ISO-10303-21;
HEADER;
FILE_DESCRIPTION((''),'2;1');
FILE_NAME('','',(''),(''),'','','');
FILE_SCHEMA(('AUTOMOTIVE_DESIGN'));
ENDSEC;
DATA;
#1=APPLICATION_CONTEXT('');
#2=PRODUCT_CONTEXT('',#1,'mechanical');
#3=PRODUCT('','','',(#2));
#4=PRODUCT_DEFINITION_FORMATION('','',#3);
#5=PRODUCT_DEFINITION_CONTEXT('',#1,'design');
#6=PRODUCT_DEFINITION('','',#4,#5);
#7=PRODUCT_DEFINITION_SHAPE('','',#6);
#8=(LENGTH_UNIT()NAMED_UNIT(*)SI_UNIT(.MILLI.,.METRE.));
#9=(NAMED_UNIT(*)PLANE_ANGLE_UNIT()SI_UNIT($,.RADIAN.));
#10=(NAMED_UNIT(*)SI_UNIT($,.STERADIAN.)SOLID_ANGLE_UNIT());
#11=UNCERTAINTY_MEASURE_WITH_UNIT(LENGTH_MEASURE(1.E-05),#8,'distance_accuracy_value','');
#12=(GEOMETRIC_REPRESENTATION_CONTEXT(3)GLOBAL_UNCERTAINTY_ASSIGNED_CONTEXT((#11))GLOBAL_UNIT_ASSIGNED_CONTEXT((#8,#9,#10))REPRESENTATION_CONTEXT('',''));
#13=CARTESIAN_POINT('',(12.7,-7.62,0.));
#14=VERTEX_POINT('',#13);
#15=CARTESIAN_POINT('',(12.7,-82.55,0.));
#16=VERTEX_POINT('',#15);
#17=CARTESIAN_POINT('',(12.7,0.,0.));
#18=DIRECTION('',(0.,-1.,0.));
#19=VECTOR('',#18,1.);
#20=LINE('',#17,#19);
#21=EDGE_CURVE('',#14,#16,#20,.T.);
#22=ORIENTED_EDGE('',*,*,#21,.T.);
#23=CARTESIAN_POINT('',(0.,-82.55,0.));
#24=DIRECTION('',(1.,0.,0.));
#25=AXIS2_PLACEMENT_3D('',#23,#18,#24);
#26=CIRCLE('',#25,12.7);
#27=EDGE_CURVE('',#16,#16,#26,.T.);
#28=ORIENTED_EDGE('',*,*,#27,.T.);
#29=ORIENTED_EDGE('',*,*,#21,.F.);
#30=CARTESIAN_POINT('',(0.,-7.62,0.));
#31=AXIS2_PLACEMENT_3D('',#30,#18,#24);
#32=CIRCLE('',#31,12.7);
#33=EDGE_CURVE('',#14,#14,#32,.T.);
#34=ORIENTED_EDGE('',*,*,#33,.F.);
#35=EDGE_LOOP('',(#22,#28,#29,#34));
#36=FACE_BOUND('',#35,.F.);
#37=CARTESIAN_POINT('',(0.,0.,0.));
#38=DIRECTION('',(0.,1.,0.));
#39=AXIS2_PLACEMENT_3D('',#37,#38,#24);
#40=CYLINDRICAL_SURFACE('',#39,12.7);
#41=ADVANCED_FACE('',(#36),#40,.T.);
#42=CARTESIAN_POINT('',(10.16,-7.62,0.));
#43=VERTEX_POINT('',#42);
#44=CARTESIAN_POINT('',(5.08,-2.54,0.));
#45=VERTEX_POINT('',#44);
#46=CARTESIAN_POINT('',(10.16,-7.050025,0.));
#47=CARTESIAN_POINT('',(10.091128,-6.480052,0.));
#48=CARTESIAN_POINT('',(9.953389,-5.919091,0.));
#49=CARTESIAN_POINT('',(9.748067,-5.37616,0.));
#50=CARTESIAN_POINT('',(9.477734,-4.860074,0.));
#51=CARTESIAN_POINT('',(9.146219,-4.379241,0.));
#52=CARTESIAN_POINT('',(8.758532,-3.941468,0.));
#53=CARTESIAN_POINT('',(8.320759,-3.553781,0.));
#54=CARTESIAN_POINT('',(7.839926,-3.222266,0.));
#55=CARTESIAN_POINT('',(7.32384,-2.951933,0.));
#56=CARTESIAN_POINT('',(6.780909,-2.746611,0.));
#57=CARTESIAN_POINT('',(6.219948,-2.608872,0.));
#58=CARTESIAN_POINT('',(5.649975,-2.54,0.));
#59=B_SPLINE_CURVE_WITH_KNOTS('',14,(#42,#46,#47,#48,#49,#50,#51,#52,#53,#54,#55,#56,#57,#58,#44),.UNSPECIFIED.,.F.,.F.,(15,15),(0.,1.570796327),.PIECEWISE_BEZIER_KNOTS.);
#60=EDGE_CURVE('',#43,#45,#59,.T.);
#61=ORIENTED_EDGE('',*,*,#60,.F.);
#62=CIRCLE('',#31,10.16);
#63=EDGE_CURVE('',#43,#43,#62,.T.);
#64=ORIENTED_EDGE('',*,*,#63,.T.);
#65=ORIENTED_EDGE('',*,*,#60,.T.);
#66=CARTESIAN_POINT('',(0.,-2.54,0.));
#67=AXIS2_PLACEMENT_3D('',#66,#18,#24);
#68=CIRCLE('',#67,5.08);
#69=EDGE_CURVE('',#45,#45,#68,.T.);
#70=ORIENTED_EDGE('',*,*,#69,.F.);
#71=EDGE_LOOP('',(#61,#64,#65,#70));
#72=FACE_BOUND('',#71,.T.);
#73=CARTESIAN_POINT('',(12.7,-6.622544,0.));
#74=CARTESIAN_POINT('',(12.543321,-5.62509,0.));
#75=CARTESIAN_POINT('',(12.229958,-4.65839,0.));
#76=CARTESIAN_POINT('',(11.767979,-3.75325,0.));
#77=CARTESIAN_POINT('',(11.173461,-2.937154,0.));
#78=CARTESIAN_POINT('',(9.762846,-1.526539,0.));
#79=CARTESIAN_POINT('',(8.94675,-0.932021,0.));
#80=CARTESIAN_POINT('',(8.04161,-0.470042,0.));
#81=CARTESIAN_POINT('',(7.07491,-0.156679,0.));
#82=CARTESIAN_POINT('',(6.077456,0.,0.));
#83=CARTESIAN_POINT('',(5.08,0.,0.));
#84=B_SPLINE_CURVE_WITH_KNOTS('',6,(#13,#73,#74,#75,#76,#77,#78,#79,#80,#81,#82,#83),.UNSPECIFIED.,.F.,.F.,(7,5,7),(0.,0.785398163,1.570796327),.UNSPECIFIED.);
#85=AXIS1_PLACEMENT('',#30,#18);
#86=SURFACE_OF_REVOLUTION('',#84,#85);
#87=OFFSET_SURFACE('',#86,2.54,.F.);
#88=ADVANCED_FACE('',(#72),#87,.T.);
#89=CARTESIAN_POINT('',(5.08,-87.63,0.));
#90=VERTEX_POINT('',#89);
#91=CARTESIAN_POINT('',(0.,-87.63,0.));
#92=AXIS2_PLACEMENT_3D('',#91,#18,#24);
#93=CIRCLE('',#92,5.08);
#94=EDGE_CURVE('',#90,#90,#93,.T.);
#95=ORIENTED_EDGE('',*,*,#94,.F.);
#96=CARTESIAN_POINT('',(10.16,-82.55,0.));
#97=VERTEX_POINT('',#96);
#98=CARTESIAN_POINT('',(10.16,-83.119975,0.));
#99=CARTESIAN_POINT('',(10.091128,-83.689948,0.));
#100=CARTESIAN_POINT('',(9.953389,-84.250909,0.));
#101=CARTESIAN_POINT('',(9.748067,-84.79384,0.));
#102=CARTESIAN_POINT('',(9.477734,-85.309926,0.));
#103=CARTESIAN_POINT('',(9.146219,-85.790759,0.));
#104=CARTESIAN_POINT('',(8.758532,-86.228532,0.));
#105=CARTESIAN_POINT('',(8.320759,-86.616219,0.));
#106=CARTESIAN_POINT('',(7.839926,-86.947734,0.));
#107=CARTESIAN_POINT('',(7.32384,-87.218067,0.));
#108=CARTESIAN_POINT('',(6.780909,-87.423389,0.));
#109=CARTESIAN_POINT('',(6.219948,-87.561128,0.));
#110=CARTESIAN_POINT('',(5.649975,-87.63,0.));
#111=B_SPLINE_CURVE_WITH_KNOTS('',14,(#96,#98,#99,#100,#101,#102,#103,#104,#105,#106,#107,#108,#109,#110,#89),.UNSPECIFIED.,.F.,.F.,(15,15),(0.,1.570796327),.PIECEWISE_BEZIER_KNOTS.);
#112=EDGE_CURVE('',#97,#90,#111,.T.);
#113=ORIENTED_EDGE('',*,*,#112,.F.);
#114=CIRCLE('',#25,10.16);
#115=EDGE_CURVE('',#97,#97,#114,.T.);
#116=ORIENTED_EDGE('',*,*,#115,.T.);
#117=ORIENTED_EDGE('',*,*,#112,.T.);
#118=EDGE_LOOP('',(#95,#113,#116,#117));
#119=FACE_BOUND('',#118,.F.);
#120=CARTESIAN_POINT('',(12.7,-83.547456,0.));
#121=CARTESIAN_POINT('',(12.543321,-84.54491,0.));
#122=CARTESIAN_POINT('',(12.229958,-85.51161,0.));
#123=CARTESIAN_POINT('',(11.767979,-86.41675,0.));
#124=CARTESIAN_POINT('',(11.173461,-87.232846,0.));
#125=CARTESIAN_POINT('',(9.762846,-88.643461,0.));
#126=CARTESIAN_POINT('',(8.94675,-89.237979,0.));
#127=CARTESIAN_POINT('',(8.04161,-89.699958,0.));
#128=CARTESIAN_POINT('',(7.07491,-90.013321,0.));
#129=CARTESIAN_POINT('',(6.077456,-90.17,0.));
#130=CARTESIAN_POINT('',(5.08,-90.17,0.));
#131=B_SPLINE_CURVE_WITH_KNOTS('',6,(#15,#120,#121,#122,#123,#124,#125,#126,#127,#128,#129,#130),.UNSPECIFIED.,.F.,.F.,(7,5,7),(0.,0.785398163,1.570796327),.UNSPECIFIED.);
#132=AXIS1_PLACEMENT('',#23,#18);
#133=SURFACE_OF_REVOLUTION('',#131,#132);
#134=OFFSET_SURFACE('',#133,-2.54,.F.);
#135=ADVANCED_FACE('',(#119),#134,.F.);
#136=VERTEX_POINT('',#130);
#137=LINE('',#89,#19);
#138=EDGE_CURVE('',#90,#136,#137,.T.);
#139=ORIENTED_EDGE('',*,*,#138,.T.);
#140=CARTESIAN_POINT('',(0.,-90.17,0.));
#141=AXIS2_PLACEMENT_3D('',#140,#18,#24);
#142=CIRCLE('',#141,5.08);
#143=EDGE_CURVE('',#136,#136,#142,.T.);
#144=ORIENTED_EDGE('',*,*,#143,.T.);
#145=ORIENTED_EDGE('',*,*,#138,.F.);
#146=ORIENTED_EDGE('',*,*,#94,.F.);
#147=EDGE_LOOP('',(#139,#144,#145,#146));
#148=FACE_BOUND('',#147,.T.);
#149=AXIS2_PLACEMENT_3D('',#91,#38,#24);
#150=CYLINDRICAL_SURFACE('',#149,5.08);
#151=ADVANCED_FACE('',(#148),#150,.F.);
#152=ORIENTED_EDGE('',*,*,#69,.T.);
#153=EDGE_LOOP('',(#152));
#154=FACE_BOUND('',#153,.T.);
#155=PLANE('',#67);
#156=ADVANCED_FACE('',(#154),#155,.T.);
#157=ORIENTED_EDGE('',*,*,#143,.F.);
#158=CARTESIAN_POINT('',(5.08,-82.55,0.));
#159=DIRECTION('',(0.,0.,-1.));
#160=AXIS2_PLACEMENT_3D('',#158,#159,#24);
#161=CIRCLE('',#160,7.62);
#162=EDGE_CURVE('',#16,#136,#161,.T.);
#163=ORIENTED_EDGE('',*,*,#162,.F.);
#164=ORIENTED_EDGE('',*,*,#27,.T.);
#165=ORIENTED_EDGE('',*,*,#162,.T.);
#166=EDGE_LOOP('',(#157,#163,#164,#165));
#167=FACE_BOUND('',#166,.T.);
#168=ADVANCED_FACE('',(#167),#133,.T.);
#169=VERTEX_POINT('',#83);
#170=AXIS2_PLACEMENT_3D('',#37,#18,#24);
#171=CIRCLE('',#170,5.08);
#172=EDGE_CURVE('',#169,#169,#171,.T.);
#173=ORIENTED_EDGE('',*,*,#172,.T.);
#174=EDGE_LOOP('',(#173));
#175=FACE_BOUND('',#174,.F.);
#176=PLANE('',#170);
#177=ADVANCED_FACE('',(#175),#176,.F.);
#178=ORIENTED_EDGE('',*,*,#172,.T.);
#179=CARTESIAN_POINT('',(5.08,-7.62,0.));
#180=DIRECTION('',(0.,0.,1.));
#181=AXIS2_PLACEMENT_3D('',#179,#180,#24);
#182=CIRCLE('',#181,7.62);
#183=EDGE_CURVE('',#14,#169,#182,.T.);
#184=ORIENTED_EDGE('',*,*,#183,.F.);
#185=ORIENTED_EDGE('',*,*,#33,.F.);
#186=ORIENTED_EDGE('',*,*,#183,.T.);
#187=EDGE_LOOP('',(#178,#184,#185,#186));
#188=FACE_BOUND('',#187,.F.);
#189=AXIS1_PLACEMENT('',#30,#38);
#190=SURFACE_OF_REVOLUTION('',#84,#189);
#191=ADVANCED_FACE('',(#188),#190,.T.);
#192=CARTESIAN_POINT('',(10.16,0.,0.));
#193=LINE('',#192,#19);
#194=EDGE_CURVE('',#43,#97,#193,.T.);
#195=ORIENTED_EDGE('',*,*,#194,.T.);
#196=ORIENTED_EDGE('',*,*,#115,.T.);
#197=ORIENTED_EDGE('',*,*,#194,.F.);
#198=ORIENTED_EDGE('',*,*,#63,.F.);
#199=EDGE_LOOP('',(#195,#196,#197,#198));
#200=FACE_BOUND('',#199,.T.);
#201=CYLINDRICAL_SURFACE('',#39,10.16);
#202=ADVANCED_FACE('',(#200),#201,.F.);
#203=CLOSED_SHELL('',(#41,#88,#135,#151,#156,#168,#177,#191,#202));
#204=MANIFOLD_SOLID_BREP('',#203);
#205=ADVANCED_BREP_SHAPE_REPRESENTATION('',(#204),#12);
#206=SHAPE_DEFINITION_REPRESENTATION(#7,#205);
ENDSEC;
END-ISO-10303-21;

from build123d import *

# Parameters (mm, degrees)
F0_R     = 12.7
F1_DEPTH = 90.17
F2_R     = 7.62
F3_T     = -2.54


# Not quite as in the source:
# - a shell that OpenCascade refuses in one call is made with other operations: the cavity is built on its own and cut out


with BuildPart() as f1:
    # F0 (on Front) → F1 (new body)
    with BuildSketch(Plane.XZ):
        Circle(F0_R)
    extrude(amount=F1_DEPTH)

    # F2
    f2_edges = [f1.edges().sort_by_distance(p)[0] for p in [
        (-12.7, -90.17, 0),
        (-12.7, 0, 0),
    ]]
    fillet(f2_edges, radius=F2_R)

    # F3: a shell. OpenCascade refuses it in one call, so the cavity is built on its own and cut out:
    # the body offset inwards by the wall thickness, plus a prism from it out through each open face.
    f3_core = offset(f1.part, amount=F3_T, mode=Mode.PRIVATE)
    f3_exits = [f3_core.faces().sort_by_distance(p)[0] for p in [
        (0, -87.63, 0),
    ]]
    add(f3_core, mode=Mode.SUBTRACT)
    extrude(f3_exits, amount=-F3_T, mode=Mode.SUBTRACT)


solid = f1.part
